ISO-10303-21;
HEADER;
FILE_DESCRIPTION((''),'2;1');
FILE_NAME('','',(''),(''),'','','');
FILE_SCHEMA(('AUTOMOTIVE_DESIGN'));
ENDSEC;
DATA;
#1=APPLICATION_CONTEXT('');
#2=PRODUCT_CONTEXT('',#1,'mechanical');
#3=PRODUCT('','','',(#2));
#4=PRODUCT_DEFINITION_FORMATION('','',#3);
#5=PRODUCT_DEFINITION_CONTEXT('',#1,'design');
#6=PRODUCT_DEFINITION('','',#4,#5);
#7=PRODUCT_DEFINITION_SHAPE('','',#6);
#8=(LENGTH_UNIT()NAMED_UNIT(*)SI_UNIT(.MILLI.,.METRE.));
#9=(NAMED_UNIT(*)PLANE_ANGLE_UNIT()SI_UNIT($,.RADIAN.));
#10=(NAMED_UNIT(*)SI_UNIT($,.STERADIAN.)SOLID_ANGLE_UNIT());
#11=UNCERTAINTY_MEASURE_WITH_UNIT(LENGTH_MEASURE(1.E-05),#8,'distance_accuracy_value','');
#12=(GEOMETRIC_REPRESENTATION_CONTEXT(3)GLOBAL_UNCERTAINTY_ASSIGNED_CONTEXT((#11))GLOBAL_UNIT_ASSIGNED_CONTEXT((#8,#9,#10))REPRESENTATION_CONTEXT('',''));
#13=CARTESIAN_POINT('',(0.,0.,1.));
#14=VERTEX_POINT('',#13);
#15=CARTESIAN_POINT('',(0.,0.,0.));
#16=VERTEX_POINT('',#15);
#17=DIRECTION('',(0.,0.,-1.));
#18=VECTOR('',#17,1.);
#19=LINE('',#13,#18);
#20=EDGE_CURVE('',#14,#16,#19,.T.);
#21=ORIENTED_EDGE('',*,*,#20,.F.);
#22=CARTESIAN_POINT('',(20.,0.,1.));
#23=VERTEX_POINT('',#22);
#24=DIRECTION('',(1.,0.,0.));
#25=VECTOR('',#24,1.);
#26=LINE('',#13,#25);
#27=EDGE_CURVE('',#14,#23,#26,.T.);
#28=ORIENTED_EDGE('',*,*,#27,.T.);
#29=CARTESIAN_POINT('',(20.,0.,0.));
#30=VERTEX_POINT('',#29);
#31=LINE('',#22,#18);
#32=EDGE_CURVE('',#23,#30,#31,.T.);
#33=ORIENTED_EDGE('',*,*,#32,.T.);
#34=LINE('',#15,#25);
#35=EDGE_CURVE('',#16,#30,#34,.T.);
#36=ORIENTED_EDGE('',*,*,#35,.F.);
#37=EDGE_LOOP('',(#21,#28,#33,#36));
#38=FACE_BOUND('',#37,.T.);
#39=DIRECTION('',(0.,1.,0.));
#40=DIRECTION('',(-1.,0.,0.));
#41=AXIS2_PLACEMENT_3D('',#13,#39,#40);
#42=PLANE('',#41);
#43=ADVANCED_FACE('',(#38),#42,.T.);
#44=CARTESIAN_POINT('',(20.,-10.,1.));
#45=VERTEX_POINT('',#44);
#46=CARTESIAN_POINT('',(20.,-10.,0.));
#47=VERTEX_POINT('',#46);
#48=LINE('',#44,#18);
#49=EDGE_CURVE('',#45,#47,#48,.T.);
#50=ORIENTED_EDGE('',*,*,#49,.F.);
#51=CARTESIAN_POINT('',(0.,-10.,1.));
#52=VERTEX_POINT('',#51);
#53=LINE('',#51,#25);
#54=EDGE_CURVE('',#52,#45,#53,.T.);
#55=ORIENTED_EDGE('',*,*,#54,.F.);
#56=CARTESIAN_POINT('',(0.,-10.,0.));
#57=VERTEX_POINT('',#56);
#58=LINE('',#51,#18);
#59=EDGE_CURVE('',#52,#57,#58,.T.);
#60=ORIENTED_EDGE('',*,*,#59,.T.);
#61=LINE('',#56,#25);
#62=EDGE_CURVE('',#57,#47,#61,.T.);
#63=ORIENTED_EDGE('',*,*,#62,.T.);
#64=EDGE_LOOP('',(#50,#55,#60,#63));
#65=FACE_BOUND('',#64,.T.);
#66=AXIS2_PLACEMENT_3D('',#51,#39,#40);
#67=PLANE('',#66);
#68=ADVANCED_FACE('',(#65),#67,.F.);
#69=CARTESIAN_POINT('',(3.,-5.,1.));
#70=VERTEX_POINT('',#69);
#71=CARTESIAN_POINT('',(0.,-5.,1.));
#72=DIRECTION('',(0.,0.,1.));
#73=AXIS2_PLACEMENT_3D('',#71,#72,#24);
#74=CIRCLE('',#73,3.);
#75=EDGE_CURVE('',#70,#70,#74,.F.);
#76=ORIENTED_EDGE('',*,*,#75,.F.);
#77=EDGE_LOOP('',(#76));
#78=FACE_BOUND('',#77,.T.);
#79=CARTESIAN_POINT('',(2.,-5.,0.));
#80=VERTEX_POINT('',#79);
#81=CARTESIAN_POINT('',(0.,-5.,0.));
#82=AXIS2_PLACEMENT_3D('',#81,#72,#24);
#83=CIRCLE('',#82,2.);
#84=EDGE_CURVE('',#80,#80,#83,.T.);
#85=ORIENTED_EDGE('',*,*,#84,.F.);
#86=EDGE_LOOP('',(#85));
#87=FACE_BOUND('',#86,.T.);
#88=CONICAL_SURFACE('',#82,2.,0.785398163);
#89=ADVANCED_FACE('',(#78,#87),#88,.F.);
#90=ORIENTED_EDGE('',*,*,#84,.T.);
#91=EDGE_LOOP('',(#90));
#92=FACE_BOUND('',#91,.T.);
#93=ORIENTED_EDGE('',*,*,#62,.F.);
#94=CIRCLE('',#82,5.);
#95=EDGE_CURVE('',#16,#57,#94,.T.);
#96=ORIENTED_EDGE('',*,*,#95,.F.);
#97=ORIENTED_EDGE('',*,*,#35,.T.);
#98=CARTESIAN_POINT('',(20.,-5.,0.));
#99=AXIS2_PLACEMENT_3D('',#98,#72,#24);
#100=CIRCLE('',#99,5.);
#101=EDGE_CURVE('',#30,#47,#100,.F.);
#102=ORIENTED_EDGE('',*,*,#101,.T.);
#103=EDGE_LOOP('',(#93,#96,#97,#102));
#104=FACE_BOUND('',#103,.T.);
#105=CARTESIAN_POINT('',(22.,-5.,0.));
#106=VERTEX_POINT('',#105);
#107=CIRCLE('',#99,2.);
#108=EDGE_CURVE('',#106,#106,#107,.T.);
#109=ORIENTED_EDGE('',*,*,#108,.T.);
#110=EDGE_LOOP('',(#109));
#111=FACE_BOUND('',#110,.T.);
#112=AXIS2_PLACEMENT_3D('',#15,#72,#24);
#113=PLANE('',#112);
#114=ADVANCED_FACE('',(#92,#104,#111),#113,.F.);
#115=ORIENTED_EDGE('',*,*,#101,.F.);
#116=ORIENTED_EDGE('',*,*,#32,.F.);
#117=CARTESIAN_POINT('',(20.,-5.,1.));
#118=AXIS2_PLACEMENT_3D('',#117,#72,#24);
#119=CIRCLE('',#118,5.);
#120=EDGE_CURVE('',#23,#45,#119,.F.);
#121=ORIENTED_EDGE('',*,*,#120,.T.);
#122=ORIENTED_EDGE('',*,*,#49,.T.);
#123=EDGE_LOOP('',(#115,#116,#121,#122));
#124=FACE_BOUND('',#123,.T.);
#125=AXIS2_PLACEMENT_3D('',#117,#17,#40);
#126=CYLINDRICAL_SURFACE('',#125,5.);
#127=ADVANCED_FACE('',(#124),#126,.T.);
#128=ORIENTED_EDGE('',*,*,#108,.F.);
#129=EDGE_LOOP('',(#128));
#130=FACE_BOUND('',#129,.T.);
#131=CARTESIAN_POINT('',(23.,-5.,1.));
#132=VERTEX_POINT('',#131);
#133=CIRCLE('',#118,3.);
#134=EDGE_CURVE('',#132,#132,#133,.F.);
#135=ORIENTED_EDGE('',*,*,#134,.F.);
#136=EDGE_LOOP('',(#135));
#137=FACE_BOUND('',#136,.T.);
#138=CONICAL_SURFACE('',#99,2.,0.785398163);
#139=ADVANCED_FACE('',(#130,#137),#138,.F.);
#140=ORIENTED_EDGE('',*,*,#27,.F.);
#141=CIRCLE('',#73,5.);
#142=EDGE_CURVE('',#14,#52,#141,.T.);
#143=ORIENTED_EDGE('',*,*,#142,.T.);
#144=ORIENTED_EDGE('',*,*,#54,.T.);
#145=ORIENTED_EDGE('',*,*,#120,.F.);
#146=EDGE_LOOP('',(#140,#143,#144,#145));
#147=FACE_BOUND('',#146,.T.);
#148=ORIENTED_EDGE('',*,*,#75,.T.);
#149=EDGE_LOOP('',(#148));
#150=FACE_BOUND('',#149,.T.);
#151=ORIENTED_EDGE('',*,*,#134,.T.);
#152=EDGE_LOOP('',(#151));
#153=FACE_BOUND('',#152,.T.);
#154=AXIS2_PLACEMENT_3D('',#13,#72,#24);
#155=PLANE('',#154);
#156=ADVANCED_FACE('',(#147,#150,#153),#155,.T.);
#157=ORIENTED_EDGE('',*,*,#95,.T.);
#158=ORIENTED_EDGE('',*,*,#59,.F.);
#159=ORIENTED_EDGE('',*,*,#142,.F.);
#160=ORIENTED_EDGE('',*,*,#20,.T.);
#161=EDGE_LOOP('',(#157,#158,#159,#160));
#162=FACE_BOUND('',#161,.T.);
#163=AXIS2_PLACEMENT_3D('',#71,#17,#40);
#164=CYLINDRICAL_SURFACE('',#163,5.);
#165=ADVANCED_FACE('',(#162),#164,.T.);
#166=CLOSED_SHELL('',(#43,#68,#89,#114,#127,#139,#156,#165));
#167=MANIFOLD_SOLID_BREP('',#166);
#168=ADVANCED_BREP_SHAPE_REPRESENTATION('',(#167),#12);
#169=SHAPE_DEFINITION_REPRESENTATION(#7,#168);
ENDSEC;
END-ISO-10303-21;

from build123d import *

# Parameters (mm, degrees)
ESQUISSE1_R        = 2
BOSS_EXTRU_1_DEPTH = 1
CHANFREIN1_SIZE    = 1


with BuildPart() as part:
    # Esquisse1 → Boss.-Extru.1 (new body)
    with BuildSketch(Plane.XY):
        with BuildLine():
            Line((0, 0), (20, 0))
            ThreePointArc((20, 0), (25, -5), (20, -10))
            Line((20, -10), (0, -10))
            ThreePointArc((0, -10), (-5, -5), (0, 0))
        make_face()
        with Locations((0, -5)):
            Circle(ESQUISSE1_R, mode=Mode.SUBTRACT)
        with Locations((20, -5)):
            Circle(ESQUISSE1_R, mode=Mode.SUBTRACT)
    extrude(amount=BOSS_EXTRU_1_DEPTH)

    # Chanfrein1
    chanfrein1_edges = [part.edges().sort_by_distance(p)[0] for p in [
        (-2, -5, 1),
        (18, -5, 1),
    ]]
    chamfer(chanfrein1_edges, length=CHANFREIN1_SIZE - 0.0001)  # a hair under: the kernel refuses the full size


solid = part.part
